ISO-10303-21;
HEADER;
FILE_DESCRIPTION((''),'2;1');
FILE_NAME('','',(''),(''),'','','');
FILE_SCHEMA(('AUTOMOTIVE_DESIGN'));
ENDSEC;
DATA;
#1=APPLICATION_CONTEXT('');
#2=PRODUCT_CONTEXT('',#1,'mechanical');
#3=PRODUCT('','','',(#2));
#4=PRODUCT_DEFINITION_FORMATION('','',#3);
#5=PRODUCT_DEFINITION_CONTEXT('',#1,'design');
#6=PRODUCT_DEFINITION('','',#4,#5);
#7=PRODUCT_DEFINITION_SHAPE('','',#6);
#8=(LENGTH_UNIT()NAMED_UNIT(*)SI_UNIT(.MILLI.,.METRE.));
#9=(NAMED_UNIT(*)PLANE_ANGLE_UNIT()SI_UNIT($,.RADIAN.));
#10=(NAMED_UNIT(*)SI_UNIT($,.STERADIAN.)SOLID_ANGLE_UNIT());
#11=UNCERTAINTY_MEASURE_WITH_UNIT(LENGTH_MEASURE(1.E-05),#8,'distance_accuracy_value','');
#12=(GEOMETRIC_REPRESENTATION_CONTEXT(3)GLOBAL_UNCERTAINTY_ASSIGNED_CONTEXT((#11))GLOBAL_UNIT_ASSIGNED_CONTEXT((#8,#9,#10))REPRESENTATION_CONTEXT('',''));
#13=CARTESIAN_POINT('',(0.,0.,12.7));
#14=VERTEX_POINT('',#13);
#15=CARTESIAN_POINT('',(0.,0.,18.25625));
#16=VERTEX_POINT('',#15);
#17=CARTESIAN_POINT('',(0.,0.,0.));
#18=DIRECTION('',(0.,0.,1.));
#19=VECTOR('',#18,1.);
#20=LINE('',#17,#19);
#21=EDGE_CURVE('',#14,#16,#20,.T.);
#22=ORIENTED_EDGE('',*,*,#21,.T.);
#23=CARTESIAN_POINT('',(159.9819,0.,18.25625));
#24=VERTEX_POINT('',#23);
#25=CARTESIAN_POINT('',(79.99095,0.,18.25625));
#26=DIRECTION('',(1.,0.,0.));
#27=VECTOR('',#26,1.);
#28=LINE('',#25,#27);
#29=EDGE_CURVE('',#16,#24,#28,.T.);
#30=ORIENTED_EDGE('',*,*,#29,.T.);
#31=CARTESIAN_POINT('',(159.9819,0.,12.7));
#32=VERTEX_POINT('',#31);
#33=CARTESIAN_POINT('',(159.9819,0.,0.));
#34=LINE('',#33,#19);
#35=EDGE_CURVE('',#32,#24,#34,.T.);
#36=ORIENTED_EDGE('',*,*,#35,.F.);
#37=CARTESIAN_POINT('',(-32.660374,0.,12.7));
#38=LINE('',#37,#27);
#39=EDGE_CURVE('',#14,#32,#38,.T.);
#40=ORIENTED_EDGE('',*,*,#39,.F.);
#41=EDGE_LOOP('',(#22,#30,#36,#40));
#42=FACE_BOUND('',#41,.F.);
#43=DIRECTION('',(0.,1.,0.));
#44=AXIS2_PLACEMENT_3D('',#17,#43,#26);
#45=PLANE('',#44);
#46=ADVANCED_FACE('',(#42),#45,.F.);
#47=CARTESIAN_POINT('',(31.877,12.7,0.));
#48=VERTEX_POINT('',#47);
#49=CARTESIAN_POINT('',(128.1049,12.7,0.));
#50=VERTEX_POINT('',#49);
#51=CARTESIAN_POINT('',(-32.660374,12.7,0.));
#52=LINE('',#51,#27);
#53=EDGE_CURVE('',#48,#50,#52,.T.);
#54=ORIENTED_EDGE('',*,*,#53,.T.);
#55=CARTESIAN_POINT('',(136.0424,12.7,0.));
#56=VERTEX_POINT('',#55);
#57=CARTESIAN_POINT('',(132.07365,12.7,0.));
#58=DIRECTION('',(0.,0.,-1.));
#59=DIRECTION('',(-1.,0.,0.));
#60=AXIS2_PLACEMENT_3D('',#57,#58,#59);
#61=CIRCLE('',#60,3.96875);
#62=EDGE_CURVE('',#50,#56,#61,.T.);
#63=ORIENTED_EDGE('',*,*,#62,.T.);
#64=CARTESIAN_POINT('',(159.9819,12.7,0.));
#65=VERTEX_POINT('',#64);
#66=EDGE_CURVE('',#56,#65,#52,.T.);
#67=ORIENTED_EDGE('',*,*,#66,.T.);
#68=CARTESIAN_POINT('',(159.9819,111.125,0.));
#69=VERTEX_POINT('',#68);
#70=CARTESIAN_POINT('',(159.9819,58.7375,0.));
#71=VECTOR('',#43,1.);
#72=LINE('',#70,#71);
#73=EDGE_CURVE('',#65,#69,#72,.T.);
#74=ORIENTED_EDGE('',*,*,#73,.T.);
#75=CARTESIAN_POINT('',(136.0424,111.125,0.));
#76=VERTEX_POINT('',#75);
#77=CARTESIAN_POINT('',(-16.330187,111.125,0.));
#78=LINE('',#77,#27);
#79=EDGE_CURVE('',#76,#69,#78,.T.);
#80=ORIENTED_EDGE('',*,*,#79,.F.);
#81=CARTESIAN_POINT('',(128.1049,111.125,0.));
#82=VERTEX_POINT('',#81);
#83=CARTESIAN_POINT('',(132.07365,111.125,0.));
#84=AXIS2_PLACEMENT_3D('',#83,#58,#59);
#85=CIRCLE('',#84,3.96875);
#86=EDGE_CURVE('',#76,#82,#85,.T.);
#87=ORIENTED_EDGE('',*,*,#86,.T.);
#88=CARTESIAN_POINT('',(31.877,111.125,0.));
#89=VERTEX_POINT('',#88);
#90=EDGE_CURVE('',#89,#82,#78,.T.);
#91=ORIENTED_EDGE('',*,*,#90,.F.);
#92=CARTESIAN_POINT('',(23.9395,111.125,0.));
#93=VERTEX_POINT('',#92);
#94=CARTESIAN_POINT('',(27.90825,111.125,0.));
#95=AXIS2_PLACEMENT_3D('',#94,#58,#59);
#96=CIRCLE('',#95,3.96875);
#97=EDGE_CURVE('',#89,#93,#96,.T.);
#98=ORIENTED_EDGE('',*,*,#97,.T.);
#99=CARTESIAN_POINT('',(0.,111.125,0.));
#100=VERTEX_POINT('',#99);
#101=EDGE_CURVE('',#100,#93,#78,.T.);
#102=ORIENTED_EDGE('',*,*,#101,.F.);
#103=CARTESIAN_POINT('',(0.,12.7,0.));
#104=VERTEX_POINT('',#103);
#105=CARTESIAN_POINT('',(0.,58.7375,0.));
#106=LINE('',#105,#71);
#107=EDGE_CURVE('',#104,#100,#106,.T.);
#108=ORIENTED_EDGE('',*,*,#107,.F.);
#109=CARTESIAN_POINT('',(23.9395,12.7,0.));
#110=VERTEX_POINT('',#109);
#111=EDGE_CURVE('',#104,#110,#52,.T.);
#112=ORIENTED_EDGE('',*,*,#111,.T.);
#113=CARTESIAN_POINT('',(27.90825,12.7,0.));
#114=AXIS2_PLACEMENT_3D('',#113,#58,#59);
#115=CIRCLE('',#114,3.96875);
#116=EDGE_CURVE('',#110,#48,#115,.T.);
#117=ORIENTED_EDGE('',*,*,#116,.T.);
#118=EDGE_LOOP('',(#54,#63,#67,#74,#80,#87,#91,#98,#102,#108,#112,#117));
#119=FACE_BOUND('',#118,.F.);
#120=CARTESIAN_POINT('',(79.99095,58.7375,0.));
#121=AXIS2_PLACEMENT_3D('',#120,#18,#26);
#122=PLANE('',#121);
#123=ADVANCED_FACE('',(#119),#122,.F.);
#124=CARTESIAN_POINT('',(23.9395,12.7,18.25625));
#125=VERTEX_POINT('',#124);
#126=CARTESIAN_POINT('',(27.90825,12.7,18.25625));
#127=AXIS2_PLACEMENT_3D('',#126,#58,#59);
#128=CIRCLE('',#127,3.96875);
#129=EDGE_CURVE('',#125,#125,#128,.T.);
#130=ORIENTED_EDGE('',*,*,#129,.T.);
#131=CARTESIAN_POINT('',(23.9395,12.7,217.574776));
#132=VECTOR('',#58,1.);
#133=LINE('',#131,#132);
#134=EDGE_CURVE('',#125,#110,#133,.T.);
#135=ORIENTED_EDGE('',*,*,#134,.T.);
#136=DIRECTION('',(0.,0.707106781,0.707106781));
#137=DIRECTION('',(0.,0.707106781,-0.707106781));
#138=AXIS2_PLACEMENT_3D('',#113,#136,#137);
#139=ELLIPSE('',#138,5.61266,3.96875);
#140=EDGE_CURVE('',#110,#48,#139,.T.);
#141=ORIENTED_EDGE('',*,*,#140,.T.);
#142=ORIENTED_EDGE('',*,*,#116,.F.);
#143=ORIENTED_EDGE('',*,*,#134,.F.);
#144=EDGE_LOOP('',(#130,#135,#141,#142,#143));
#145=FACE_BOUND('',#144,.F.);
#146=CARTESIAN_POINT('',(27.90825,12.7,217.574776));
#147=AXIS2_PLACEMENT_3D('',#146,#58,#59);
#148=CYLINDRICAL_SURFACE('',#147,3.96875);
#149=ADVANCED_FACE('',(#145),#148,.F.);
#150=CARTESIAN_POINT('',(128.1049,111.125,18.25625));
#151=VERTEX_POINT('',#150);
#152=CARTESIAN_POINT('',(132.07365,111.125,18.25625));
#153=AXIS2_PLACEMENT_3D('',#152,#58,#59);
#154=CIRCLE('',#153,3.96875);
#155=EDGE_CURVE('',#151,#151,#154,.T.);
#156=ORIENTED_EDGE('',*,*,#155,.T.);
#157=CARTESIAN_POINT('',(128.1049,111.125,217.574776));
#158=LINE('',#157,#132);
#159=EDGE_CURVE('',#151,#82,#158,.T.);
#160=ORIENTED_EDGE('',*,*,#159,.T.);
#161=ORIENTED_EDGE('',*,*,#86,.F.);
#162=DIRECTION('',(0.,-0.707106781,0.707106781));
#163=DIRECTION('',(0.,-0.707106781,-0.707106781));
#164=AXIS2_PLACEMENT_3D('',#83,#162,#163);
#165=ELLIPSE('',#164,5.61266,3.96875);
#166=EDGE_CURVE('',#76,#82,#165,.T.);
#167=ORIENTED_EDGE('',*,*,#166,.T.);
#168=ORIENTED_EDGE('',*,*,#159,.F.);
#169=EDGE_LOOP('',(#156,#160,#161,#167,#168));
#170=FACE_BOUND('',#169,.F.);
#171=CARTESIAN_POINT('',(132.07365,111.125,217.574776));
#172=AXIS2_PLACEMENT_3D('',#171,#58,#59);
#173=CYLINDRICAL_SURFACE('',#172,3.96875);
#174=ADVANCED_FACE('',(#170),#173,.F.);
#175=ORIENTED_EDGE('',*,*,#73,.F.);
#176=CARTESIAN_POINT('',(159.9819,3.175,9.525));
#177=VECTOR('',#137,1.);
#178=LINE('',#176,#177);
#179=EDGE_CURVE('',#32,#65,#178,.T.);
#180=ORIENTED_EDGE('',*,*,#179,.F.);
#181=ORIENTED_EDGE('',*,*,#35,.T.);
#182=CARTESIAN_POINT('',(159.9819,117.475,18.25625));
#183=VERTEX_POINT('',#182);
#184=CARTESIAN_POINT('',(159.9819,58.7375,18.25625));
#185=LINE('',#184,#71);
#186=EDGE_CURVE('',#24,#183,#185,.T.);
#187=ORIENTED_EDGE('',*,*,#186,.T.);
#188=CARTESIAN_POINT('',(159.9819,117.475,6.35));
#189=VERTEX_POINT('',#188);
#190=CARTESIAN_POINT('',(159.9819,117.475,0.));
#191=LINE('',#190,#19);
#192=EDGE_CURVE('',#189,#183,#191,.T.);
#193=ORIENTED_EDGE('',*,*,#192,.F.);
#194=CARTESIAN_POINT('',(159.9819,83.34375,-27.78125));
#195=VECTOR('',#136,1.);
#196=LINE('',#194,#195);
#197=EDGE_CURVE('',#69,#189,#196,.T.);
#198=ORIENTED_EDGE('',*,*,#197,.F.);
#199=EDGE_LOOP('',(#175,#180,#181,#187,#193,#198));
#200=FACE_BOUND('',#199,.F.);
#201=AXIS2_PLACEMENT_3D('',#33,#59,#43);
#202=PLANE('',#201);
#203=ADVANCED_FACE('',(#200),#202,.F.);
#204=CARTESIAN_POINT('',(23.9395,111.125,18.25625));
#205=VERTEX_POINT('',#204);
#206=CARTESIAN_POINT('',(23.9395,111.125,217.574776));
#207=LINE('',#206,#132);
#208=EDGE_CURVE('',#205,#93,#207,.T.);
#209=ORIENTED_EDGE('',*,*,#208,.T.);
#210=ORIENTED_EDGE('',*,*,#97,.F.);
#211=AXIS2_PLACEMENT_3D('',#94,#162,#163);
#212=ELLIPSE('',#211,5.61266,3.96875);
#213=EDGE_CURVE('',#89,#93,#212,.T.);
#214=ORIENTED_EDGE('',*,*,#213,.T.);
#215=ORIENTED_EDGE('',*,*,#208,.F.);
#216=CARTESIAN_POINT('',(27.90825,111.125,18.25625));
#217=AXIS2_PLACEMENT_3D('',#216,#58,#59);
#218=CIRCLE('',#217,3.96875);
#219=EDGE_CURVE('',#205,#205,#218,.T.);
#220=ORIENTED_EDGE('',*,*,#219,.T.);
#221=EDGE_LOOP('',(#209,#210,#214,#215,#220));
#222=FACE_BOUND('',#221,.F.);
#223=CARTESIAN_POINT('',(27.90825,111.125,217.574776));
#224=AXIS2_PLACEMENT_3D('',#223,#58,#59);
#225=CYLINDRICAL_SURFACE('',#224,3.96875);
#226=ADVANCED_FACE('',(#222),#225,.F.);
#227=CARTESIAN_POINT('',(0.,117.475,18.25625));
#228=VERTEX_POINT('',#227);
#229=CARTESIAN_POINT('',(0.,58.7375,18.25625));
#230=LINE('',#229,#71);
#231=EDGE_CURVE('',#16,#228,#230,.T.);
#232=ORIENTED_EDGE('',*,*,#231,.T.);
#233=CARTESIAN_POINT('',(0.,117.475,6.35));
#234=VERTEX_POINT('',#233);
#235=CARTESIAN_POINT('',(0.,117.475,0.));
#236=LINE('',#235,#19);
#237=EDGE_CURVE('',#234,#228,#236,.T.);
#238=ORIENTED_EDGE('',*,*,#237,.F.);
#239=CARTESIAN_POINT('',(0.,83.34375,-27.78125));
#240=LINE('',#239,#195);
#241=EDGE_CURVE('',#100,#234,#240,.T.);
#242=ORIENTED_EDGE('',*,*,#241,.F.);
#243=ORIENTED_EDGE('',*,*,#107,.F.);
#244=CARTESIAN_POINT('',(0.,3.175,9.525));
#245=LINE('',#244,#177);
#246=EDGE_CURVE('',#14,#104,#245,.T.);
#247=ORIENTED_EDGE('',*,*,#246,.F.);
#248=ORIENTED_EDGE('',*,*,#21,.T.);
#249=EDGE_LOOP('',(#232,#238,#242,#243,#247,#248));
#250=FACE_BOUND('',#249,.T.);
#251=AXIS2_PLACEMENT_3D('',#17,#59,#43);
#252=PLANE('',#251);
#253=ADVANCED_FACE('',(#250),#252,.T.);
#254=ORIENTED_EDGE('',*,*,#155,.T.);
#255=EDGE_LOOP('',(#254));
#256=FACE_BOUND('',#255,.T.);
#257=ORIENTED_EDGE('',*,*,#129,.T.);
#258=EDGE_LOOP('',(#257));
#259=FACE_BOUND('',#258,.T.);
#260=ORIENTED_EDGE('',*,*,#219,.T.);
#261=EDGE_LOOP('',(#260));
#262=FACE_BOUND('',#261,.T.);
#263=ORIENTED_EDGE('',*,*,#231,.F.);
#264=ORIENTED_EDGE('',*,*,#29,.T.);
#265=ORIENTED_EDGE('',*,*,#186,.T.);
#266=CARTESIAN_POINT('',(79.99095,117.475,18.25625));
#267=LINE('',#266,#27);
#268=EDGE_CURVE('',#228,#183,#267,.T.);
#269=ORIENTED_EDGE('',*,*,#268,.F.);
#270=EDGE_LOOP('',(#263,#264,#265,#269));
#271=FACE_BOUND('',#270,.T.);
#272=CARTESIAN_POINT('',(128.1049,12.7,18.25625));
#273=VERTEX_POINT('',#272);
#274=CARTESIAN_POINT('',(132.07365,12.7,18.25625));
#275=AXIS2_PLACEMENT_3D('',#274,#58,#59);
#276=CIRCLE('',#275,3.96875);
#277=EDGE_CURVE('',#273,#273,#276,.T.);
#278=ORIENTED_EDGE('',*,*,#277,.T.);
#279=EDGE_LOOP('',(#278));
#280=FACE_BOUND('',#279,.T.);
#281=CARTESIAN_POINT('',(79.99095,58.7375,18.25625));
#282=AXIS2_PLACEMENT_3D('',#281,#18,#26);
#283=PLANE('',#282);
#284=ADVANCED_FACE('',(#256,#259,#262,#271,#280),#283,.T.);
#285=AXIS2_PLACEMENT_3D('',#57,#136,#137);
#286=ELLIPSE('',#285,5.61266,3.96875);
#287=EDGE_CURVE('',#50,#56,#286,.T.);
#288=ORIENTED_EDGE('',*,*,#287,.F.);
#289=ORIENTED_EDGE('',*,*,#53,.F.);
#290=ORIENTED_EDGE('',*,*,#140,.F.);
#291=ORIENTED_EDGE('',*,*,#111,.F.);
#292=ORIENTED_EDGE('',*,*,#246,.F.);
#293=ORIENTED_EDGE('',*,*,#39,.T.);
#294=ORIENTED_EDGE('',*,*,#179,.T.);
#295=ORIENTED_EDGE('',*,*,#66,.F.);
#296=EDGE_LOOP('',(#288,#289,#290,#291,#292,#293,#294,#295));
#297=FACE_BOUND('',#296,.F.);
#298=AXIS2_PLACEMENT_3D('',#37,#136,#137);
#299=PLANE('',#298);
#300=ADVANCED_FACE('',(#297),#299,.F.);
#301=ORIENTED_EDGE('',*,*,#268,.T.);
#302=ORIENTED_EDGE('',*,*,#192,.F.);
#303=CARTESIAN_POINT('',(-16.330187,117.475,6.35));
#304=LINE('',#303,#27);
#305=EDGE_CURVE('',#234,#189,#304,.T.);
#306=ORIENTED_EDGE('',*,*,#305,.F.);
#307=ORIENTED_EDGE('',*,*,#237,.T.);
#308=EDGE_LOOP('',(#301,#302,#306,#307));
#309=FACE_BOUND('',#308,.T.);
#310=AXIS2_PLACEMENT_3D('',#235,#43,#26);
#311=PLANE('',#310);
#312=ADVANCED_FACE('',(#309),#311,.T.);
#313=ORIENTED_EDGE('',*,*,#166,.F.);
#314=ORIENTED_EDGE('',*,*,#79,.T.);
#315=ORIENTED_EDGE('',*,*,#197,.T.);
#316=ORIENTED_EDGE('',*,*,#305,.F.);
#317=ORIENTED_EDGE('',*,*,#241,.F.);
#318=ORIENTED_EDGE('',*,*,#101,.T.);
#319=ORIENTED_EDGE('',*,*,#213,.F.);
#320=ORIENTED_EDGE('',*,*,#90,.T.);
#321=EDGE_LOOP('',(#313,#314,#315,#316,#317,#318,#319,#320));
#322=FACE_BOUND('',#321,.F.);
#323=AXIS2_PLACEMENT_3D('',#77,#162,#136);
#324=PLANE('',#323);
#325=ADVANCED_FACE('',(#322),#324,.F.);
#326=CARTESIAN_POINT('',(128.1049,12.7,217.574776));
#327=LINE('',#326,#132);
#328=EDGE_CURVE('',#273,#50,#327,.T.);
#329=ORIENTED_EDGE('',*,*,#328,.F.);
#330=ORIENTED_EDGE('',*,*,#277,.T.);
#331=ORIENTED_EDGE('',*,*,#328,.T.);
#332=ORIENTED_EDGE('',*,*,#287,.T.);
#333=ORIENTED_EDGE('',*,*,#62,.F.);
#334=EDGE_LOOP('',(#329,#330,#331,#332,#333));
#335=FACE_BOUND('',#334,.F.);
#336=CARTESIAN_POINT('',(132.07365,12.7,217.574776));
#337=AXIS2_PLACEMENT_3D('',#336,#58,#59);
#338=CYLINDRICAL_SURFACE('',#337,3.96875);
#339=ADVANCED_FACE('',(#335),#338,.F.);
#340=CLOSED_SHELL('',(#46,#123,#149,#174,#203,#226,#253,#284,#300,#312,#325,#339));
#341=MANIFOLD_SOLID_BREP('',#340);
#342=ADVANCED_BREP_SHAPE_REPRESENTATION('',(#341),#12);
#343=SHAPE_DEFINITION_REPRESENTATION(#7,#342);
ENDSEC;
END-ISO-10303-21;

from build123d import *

# Parameters (mm, degrees)
F0_W        = 159.9819
F0_H        = 117.475
F1_DEPTH    = 18.25625
F3_D        = 7.9375
F5_D        = 7.9375
F6_T1_DEPTH = 225.3026478943
F7_T1_DEPTH = 192.6422739472


# Not quite as in the source:
# - a fillet or chamfer that OpenCascade refuses, or shapes differently, is made with other operations: its cross-section is extruded or revolved along the edge and cut away or added


with BuildPart() as f1:
    # F0 (on Top) → F1 (new body)
    with BuildSketch(Plane.XY):
        with Locations((79.99095, 58.7375)):
            Rectangle(F0_W, F0_H)
    extrude(amount=F1_DEPTH)

    # F3 (through all)
    with Locations(Plane.XY.offset(18.25625)):
        with Locations((27.90825, 12.7), (132.07365, 12.7)):
            Hole(F3_D / 2)

    # F5 (through all)
    with Locations(Plane.XY.offset(18.25625)):
        with Locations((27.90825, 111.125), (132.07365, 111.125)):
            Hole(F5_D / 2)

    # F6: chamfer of 12.7 on 1 edges, made by hand

    # F6_s2 → F6_t1 (cut)
    with BuildSketch(Plane.YZ.offset(-32.6603739472)):
        Polygon((0, 12.7), (12.7, 0), (0, 0), align=None)
    extrude(amount=F6_T1_DEPTH, mode=Mode.SUBTRACT)

    # F7: chamfer of 6.35 on 1 edges, made by hand

    # F7_s2 → F7_t1 (cut)
    with BuildSketch(Plane.YZ.offset(-16.3301869736)):
        Polygon((111.125, 0), (117.475, 6.35), (117.475, 0), align=None)
    extrude(amount=F7_T1_DEPTH, mode=Mode.SUBTRACT)


solid = f1.part
